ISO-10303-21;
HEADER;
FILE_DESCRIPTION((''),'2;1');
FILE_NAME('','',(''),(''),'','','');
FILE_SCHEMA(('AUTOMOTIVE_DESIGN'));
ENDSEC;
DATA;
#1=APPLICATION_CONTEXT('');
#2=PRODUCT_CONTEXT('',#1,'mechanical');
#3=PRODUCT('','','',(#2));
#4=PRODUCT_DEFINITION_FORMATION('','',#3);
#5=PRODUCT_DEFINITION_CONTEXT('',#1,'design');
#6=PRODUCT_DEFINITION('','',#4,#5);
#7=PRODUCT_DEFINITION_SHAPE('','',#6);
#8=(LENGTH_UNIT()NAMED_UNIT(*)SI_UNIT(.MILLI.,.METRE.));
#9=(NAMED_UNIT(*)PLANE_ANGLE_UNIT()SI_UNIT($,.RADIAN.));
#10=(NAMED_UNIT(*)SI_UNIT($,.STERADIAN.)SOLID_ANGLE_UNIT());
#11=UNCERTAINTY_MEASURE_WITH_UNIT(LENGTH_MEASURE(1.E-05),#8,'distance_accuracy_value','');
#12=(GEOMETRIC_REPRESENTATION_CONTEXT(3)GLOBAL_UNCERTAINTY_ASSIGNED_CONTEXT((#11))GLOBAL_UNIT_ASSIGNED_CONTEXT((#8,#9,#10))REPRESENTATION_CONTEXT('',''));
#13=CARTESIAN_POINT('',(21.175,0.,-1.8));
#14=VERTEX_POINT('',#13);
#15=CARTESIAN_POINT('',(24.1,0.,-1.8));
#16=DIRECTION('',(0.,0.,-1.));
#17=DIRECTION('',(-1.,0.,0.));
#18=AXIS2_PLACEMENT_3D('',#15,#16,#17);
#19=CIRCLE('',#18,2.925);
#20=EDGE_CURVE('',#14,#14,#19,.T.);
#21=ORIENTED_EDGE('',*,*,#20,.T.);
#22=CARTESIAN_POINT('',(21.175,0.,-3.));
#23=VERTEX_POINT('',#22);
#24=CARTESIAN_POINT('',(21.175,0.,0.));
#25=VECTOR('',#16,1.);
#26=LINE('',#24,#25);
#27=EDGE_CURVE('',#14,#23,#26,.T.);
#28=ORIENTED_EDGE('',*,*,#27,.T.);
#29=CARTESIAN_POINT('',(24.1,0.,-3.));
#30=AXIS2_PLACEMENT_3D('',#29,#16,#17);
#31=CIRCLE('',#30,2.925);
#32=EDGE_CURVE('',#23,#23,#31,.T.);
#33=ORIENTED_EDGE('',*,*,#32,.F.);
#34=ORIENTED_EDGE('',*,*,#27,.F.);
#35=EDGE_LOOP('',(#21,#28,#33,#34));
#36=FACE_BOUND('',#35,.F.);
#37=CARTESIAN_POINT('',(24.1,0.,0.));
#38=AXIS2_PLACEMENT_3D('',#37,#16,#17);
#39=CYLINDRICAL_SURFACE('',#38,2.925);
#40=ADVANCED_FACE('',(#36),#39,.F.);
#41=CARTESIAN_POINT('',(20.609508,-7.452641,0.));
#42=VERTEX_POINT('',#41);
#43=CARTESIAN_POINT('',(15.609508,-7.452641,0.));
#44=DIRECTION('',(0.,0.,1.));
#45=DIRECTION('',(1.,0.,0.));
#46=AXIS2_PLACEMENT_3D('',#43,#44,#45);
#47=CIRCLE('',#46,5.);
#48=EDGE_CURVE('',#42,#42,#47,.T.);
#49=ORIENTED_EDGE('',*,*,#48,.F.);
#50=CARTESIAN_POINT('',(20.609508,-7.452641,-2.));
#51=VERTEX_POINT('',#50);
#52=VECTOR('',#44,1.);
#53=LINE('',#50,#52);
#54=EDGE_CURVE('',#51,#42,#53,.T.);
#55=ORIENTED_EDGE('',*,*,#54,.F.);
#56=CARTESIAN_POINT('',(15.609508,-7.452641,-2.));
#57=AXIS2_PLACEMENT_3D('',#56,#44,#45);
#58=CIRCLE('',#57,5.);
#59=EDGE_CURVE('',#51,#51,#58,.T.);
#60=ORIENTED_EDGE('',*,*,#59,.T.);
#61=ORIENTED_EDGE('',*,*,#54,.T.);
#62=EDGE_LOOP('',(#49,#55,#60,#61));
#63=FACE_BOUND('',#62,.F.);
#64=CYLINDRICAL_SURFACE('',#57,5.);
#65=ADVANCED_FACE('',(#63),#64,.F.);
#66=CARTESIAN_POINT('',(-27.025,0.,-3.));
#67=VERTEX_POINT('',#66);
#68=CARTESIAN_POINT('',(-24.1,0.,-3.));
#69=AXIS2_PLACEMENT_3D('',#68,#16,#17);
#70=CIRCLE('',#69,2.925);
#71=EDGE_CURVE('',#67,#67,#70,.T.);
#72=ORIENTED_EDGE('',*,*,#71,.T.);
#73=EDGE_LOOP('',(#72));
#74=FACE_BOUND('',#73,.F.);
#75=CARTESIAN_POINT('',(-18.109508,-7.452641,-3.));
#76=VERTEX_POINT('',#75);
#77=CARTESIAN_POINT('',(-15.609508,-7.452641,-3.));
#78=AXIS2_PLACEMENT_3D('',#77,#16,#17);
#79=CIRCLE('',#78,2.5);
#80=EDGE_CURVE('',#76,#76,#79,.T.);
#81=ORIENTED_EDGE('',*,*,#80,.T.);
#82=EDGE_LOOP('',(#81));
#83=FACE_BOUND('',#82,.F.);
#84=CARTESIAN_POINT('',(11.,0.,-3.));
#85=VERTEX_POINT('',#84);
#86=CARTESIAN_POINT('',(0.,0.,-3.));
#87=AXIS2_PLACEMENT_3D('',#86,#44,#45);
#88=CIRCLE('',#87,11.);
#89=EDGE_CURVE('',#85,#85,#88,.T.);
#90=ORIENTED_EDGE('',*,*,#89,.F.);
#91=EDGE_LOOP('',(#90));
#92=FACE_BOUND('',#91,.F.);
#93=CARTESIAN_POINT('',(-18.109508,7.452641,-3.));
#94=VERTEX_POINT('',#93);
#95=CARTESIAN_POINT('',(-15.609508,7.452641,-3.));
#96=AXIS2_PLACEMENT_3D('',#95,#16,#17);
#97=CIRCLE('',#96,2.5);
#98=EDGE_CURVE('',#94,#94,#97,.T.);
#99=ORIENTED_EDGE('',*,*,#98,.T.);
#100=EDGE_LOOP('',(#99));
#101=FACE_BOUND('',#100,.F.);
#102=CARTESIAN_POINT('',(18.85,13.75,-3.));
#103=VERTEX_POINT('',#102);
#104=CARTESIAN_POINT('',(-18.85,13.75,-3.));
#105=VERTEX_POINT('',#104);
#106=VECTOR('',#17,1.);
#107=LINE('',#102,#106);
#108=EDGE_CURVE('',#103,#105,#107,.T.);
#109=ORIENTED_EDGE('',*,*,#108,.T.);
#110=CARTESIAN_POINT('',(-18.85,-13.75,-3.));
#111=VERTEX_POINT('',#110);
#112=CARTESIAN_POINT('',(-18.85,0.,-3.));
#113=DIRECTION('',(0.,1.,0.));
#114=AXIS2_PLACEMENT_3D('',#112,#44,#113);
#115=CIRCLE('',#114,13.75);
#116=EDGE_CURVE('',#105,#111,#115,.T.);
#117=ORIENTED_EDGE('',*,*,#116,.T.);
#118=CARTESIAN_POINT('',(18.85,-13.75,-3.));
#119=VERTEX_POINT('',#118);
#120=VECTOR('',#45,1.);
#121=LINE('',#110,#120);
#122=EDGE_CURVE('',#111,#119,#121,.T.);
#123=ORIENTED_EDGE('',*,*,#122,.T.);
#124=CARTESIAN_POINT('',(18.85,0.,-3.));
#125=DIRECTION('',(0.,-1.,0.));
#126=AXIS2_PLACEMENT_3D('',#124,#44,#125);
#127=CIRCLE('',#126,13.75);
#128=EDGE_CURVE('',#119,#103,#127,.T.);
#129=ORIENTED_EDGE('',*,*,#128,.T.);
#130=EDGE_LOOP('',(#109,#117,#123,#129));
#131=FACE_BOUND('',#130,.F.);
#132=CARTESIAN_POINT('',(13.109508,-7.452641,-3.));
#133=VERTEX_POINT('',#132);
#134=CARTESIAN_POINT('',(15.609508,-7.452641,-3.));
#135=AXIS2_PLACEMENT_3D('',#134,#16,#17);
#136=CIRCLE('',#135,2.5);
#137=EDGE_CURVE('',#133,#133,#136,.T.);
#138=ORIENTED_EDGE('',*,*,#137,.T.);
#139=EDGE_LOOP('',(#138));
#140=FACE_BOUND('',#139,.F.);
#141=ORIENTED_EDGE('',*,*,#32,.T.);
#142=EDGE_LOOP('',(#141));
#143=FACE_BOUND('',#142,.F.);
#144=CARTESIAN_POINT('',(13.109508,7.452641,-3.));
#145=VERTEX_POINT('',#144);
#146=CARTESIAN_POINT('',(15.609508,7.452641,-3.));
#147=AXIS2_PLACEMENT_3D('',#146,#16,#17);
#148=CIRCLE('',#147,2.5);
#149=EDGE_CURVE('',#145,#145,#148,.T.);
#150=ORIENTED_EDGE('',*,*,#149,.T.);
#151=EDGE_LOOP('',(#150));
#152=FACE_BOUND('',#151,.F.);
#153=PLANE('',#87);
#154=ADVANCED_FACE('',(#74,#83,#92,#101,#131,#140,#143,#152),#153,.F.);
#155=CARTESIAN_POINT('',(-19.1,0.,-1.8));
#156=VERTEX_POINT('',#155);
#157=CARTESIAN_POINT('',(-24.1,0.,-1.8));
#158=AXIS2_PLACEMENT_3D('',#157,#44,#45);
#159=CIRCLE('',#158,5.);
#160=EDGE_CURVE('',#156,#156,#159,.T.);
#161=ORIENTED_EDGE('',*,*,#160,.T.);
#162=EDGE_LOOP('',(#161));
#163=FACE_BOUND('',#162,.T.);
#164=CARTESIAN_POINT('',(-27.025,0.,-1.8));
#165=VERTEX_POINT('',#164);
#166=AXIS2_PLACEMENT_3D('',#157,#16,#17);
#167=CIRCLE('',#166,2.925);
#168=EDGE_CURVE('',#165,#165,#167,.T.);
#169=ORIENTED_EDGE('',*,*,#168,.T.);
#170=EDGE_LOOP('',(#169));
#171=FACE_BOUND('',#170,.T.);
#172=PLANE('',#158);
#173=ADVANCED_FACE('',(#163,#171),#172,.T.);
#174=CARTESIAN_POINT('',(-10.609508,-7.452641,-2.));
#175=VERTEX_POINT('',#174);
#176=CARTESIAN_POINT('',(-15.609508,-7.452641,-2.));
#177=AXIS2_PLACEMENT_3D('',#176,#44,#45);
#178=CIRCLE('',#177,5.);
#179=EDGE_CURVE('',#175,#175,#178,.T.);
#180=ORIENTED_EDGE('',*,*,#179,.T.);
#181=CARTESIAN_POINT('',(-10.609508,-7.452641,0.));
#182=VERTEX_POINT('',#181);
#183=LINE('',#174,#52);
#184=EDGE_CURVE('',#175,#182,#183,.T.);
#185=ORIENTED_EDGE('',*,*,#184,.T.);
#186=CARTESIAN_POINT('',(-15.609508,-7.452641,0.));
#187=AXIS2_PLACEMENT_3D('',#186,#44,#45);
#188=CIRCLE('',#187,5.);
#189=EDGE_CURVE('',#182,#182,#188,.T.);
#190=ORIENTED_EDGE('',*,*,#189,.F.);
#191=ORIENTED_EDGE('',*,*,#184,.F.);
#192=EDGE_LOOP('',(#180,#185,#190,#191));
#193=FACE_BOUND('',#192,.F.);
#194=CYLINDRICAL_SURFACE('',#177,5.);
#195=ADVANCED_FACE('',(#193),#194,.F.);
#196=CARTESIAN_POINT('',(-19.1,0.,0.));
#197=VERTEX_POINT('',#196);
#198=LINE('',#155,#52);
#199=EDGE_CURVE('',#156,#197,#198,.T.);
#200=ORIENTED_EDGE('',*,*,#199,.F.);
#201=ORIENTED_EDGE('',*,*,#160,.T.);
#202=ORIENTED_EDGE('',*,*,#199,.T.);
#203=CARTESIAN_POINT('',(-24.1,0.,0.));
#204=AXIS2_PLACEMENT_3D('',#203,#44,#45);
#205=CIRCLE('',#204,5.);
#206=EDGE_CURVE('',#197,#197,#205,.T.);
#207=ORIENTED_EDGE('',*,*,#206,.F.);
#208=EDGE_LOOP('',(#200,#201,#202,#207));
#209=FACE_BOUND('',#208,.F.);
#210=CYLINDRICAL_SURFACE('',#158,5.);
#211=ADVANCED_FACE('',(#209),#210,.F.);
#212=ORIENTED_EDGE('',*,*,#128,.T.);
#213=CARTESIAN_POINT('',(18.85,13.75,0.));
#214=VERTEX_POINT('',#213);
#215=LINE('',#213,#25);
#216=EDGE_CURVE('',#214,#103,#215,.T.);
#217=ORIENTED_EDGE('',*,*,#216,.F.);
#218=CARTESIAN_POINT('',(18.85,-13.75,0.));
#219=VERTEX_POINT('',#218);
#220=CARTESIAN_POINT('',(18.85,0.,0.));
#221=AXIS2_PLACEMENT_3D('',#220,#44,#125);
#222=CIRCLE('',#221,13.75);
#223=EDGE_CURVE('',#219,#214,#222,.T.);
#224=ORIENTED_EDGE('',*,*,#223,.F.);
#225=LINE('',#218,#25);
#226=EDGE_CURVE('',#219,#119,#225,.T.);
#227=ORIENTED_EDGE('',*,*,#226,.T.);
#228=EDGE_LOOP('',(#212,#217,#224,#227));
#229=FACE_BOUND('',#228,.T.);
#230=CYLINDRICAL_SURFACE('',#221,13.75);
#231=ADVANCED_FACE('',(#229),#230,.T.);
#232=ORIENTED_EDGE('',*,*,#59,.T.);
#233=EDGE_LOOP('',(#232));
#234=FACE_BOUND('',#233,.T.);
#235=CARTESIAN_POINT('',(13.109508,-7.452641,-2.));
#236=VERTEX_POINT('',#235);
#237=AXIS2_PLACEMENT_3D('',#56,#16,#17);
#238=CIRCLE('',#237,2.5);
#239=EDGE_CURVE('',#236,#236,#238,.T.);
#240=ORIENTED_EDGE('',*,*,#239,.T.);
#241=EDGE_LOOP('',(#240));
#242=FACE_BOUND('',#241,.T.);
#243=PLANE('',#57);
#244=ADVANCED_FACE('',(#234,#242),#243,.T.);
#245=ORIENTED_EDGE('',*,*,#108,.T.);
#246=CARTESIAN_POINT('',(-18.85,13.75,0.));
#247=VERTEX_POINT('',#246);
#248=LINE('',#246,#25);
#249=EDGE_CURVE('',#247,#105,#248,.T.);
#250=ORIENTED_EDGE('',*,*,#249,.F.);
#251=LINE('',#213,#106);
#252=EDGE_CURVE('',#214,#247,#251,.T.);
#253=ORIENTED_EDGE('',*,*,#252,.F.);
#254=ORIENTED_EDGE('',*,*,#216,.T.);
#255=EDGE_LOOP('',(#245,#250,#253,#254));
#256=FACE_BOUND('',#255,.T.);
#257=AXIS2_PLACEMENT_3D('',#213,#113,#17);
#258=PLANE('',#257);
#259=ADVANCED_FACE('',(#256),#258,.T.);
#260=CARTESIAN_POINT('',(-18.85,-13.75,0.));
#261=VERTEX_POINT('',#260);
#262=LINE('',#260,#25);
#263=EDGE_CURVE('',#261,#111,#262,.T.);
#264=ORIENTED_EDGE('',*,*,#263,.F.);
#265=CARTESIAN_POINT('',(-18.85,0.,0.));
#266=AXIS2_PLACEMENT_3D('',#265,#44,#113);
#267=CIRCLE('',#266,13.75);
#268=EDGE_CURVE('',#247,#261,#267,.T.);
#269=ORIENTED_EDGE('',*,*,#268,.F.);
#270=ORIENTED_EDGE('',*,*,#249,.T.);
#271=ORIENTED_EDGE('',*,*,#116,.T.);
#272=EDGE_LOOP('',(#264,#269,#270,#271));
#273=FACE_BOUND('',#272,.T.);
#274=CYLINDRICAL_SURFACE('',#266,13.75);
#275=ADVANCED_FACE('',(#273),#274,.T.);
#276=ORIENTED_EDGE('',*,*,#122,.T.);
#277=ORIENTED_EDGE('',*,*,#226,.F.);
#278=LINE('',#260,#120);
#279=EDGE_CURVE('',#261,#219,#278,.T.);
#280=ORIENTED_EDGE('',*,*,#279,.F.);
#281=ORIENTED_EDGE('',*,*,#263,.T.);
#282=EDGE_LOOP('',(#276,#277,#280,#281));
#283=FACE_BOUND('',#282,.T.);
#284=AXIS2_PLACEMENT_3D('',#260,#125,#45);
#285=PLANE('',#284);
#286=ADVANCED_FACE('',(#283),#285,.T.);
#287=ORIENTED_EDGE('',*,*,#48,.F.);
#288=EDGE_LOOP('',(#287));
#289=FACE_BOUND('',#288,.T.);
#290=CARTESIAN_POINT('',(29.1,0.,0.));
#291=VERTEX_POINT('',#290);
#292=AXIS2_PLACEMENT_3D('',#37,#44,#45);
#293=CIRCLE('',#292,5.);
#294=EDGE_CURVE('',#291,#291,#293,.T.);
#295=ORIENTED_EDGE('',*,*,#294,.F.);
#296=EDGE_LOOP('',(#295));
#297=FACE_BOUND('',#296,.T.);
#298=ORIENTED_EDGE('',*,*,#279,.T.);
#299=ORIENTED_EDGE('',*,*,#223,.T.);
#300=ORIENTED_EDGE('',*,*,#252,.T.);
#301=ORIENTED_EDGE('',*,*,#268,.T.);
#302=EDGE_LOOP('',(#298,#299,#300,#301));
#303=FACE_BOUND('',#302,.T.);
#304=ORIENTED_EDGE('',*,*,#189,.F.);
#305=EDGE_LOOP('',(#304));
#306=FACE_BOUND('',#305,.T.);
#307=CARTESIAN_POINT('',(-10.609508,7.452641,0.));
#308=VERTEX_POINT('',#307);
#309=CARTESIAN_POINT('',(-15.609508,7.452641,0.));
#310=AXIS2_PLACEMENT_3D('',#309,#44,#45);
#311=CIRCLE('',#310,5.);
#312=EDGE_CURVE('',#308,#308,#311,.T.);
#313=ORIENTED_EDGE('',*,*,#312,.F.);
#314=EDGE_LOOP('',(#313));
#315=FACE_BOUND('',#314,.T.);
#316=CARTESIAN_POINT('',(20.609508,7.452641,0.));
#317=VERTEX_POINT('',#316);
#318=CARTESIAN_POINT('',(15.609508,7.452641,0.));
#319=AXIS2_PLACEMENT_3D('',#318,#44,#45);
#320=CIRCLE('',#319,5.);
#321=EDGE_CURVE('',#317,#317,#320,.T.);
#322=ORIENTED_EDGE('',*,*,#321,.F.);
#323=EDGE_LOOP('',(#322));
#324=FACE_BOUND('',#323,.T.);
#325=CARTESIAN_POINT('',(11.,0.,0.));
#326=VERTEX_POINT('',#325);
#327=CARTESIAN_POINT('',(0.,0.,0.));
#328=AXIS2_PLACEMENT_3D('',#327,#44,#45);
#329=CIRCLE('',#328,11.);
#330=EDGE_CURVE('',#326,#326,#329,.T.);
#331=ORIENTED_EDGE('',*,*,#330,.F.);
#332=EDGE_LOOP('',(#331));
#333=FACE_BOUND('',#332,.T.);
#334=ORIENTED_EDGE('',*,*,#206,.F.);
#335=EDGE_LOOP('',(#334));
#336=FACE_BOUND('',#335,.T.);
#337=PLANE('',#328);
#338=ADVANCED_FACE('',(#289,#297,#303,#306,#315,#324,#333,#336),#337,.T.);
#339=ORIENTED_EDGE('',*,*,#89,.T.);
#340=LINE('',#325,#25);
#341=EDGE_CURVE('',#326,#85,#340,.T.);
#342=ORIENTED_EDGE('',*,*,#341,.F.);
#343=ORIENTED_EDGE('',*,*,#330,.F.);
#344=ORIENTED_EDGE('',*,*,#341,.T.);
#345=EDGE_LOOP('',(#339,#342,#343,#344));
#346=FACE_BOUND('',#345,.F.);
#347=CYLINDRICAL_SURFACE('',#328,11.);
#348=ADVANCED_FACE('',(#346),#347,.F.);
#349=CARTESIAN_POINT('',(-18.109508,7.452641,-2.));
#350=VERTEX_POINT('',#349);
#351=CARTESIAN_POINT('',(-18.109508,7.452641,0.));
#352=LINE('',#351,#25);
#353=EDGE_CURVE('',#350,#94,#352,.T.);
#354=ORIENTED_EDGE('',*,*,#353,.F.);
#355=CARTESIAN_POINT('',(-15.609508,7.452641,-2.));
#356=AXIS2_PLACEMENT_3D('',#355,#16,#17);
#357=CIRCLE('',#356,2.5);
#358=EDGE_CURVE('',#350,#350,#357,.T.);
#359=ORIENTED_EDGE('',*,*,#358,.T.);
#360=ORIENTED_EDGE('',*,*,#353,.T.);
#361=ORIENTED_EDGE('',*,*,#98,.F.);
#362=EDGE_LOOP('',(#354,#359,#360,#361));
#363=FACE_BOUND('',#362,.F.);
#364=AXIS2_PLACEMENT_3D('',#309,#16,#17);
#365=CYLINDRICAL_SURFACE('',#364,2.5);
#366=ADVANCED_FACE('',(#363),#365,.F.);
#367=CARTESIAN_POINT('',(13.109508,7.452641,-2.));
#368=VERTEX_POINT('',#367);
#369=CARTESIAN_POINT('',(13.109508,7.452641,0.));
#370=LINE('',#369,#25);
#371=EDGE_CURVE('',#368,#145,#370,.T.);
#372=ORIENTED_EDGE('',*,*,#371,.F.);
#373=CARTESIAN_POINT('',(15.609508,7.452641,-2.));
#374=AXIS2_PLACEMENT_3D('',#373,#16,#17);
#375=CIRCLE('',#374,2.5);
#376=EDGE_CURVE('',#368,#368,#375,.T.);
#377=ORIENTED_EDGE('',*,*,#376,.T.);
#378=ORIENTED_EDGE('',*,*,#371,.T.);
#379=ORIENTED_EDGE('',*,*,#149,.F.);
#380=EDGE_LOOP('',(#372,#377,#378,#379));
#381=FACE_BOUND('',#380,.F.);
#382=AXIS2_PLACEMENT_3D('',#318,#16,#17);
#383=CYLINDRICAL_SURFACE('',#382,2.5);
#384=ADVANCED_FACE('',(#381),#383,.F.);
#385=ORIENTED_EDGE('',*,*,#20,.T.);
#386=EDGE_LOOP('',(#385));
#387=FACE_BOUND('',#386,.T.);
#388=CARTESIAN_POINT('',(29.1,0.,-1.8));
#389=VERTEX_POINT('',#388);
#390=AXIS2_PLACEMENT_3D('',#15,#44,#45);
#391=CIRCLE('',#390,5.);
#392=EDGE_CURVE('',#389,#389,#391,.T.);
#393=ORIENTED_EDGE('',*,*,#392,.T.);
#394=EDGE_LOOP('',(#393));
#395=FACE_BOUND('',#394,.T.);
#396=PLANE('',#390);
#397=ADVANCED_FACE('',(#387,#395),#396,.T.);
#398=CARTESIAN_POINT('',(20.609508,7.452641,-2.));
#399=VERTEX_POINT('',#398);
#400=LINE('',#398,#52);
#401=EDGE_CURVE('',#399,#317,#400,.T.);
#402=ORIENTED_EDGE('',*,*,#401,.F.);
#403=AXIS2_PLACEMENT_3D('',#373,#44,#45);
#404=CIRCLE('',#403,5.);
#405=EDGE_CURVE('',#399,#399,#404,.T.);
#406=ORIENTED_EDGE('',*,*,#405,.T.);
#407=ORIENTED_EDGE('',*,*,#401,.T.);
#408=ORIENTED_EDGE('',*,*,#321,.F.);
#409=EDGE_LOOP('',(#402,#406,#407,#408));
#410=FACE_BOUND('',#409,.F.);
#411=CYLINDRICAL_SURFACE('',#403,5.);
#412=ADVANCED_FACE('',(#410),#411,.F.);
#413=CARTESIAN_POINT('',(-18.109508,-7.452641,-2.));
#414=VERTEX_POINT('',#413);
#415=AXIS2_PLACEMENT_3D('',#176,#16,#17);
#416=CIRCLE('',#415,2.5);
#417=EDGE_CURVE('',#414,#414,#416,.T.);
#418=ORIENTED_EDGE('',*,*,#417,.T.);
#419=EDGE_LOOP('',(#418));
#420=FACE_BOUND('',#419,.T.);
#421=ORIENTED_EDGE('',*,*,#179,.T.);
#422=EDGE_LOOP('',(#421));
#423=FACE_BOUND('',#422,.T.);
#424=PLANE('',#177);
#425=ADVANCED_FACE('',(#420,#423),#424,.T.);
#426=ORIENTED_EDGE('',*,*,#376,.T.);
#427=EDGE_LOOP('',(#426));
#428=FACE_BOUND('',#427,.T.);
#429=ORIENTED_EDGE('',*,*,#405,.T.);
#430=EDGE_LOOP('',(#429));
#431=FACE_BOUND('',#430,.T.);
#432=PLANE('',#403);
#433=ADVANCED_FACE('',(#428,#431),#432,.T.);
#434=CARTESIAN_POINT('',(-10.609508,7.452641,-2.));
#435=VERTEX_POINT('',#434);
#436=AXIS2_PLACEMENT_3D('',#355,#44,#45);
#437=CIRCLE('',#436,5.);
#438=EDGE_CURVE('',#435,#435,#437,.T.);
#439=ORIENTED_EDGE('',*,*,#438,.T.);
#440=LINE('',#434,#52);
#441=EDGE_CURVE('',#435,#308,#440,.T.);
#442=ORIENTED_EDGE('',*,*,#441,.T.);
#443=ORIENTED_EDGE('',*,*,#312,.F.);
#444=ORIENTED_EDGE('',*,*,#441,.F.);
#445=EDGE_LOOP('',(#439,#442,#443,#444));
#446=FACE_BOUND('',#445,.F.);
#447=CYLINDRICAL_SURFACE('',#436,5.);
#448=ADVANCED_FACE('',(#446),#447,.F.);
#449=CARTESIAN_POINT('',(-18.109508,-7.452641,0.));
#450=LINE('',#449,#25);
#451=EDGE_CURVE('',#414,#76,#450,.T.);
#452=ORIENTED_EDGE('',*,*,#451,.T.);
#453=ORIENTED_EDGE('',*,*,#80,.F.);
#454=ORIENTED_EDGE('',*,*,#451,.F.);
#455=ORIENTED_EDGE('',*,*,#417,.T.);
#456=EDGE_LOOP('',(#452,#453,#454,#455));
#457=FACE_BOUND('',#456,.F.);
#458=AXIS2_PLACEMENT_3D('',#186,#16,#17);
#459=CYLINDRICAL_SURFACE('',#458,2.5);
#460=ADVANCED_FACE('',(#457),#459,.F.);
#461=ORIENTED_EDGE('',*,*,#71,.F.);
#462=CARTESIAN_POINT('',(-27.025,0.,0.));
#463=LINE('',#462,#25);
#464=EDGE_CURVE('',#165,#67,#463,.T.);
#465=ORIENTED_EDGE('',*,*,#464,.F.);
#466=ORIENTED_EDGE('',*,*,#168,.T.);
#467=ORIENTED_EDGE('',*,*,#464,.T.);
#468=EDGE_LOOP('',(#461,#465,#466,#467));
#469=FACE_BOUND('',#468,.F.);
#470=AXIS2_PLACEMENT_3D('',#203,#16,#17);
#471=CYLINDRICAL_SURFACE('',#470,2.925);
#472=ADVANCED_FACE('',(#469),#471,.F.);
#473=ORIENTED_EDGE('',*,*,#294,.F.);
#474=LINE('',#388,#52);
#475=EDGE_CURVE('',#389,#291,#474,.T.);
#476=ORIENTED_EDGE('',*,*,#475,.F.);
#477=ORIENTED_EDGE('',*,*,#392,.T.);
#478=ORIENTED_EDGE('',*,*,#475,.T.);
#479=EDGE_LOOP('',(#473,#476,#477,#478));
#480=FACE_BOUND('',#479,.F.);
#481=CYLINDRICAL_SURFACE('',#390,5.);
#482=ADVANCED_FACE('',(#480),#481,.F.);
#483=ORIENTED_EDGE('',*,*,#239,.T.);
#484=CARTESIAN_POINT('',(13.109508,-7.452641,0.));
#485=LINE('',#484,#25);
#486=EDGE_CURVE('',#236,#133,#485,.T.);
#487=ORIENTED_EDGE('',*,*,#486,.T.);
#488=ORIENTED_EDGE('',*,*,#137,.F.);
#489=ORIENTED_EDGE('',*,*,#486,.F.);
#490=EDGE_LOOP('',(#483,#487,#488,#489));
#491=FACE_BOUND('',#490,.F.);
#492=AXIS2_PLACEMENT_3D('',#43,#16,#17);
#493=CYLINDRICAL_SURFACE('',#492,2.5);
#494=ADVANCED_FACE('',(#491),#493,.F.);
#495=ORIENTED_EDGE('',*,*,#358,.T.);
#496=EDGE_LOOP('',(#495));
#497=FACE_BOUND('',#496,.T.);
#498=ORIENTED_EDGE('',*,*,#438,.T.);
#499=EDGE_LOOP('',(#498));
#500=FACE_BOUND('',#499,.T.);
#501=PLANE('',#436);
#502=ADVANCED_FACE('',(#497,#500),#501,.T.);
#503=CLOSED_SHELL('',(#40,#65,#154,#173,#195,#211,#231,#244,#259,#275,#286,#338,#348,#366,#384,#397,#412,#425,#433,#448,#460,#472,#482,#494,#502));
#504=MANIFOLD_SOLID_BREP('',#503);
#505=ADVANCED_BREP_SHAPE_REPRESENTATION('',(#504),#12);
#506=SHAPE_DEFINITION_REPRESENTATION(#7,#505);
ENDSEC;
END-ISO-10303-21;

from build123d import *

# Parameters (mm, degrees)
F0_R           = 11
F1_DEPTH       = 3
F2_D           = 5.85
F2_CBORE_D     = 10
F2_CBORE_DEPTH = 1.8
F3_D           = 5
F3_CBORE_D     = 10
F3_CBORE_DEPTH = 2


# Not quite as in the source:
# - a feature names something its author has since deleted; it is built from what else it names


with BuildPart() as f1:
    # F0 (on Top) → F1 (new body)
    with BuildSketch(Plane.XY):
        with BuildLine():
            Line((18.85, 13.75), (-18.85, 13.75))
            ThreePointArc((-18.85, 13.75), (-32.6, 0), (-18.85, -13.75))
            Line((-18.85, -13.75), (18.85, -13.75))
            ThreePointArc((18.85, -13.75), (32.6, 0), (18.85, 13.75))
        make_face()
        Circle(F0_R, mode=Mode.SUBTRACT)
    extrude(amount=-F1_DEPTH)

    # F2 (through all)
    with Locations(Plane.XY):
        with Locations((24.1, 0), (-24.1, 0)):
            CounterBoreHole(F2_D / 2, F2_CBORE_D / 2, F2_CBORE_DEPTH)

    # F3 (through all)
    with Locations(Plane.XY):
        with Locations((-15.6095083693, 7.4526413832), (-15.6095083693, -7.4526413832), (15.6095083693, -7.4526413832), (15.6095083693, 7.4526413832)):
            CounterBoreHole(F3_D / 2, F3_CBORE_D / 2, F3_CBORE_DEPTH)


solid = f1.part
